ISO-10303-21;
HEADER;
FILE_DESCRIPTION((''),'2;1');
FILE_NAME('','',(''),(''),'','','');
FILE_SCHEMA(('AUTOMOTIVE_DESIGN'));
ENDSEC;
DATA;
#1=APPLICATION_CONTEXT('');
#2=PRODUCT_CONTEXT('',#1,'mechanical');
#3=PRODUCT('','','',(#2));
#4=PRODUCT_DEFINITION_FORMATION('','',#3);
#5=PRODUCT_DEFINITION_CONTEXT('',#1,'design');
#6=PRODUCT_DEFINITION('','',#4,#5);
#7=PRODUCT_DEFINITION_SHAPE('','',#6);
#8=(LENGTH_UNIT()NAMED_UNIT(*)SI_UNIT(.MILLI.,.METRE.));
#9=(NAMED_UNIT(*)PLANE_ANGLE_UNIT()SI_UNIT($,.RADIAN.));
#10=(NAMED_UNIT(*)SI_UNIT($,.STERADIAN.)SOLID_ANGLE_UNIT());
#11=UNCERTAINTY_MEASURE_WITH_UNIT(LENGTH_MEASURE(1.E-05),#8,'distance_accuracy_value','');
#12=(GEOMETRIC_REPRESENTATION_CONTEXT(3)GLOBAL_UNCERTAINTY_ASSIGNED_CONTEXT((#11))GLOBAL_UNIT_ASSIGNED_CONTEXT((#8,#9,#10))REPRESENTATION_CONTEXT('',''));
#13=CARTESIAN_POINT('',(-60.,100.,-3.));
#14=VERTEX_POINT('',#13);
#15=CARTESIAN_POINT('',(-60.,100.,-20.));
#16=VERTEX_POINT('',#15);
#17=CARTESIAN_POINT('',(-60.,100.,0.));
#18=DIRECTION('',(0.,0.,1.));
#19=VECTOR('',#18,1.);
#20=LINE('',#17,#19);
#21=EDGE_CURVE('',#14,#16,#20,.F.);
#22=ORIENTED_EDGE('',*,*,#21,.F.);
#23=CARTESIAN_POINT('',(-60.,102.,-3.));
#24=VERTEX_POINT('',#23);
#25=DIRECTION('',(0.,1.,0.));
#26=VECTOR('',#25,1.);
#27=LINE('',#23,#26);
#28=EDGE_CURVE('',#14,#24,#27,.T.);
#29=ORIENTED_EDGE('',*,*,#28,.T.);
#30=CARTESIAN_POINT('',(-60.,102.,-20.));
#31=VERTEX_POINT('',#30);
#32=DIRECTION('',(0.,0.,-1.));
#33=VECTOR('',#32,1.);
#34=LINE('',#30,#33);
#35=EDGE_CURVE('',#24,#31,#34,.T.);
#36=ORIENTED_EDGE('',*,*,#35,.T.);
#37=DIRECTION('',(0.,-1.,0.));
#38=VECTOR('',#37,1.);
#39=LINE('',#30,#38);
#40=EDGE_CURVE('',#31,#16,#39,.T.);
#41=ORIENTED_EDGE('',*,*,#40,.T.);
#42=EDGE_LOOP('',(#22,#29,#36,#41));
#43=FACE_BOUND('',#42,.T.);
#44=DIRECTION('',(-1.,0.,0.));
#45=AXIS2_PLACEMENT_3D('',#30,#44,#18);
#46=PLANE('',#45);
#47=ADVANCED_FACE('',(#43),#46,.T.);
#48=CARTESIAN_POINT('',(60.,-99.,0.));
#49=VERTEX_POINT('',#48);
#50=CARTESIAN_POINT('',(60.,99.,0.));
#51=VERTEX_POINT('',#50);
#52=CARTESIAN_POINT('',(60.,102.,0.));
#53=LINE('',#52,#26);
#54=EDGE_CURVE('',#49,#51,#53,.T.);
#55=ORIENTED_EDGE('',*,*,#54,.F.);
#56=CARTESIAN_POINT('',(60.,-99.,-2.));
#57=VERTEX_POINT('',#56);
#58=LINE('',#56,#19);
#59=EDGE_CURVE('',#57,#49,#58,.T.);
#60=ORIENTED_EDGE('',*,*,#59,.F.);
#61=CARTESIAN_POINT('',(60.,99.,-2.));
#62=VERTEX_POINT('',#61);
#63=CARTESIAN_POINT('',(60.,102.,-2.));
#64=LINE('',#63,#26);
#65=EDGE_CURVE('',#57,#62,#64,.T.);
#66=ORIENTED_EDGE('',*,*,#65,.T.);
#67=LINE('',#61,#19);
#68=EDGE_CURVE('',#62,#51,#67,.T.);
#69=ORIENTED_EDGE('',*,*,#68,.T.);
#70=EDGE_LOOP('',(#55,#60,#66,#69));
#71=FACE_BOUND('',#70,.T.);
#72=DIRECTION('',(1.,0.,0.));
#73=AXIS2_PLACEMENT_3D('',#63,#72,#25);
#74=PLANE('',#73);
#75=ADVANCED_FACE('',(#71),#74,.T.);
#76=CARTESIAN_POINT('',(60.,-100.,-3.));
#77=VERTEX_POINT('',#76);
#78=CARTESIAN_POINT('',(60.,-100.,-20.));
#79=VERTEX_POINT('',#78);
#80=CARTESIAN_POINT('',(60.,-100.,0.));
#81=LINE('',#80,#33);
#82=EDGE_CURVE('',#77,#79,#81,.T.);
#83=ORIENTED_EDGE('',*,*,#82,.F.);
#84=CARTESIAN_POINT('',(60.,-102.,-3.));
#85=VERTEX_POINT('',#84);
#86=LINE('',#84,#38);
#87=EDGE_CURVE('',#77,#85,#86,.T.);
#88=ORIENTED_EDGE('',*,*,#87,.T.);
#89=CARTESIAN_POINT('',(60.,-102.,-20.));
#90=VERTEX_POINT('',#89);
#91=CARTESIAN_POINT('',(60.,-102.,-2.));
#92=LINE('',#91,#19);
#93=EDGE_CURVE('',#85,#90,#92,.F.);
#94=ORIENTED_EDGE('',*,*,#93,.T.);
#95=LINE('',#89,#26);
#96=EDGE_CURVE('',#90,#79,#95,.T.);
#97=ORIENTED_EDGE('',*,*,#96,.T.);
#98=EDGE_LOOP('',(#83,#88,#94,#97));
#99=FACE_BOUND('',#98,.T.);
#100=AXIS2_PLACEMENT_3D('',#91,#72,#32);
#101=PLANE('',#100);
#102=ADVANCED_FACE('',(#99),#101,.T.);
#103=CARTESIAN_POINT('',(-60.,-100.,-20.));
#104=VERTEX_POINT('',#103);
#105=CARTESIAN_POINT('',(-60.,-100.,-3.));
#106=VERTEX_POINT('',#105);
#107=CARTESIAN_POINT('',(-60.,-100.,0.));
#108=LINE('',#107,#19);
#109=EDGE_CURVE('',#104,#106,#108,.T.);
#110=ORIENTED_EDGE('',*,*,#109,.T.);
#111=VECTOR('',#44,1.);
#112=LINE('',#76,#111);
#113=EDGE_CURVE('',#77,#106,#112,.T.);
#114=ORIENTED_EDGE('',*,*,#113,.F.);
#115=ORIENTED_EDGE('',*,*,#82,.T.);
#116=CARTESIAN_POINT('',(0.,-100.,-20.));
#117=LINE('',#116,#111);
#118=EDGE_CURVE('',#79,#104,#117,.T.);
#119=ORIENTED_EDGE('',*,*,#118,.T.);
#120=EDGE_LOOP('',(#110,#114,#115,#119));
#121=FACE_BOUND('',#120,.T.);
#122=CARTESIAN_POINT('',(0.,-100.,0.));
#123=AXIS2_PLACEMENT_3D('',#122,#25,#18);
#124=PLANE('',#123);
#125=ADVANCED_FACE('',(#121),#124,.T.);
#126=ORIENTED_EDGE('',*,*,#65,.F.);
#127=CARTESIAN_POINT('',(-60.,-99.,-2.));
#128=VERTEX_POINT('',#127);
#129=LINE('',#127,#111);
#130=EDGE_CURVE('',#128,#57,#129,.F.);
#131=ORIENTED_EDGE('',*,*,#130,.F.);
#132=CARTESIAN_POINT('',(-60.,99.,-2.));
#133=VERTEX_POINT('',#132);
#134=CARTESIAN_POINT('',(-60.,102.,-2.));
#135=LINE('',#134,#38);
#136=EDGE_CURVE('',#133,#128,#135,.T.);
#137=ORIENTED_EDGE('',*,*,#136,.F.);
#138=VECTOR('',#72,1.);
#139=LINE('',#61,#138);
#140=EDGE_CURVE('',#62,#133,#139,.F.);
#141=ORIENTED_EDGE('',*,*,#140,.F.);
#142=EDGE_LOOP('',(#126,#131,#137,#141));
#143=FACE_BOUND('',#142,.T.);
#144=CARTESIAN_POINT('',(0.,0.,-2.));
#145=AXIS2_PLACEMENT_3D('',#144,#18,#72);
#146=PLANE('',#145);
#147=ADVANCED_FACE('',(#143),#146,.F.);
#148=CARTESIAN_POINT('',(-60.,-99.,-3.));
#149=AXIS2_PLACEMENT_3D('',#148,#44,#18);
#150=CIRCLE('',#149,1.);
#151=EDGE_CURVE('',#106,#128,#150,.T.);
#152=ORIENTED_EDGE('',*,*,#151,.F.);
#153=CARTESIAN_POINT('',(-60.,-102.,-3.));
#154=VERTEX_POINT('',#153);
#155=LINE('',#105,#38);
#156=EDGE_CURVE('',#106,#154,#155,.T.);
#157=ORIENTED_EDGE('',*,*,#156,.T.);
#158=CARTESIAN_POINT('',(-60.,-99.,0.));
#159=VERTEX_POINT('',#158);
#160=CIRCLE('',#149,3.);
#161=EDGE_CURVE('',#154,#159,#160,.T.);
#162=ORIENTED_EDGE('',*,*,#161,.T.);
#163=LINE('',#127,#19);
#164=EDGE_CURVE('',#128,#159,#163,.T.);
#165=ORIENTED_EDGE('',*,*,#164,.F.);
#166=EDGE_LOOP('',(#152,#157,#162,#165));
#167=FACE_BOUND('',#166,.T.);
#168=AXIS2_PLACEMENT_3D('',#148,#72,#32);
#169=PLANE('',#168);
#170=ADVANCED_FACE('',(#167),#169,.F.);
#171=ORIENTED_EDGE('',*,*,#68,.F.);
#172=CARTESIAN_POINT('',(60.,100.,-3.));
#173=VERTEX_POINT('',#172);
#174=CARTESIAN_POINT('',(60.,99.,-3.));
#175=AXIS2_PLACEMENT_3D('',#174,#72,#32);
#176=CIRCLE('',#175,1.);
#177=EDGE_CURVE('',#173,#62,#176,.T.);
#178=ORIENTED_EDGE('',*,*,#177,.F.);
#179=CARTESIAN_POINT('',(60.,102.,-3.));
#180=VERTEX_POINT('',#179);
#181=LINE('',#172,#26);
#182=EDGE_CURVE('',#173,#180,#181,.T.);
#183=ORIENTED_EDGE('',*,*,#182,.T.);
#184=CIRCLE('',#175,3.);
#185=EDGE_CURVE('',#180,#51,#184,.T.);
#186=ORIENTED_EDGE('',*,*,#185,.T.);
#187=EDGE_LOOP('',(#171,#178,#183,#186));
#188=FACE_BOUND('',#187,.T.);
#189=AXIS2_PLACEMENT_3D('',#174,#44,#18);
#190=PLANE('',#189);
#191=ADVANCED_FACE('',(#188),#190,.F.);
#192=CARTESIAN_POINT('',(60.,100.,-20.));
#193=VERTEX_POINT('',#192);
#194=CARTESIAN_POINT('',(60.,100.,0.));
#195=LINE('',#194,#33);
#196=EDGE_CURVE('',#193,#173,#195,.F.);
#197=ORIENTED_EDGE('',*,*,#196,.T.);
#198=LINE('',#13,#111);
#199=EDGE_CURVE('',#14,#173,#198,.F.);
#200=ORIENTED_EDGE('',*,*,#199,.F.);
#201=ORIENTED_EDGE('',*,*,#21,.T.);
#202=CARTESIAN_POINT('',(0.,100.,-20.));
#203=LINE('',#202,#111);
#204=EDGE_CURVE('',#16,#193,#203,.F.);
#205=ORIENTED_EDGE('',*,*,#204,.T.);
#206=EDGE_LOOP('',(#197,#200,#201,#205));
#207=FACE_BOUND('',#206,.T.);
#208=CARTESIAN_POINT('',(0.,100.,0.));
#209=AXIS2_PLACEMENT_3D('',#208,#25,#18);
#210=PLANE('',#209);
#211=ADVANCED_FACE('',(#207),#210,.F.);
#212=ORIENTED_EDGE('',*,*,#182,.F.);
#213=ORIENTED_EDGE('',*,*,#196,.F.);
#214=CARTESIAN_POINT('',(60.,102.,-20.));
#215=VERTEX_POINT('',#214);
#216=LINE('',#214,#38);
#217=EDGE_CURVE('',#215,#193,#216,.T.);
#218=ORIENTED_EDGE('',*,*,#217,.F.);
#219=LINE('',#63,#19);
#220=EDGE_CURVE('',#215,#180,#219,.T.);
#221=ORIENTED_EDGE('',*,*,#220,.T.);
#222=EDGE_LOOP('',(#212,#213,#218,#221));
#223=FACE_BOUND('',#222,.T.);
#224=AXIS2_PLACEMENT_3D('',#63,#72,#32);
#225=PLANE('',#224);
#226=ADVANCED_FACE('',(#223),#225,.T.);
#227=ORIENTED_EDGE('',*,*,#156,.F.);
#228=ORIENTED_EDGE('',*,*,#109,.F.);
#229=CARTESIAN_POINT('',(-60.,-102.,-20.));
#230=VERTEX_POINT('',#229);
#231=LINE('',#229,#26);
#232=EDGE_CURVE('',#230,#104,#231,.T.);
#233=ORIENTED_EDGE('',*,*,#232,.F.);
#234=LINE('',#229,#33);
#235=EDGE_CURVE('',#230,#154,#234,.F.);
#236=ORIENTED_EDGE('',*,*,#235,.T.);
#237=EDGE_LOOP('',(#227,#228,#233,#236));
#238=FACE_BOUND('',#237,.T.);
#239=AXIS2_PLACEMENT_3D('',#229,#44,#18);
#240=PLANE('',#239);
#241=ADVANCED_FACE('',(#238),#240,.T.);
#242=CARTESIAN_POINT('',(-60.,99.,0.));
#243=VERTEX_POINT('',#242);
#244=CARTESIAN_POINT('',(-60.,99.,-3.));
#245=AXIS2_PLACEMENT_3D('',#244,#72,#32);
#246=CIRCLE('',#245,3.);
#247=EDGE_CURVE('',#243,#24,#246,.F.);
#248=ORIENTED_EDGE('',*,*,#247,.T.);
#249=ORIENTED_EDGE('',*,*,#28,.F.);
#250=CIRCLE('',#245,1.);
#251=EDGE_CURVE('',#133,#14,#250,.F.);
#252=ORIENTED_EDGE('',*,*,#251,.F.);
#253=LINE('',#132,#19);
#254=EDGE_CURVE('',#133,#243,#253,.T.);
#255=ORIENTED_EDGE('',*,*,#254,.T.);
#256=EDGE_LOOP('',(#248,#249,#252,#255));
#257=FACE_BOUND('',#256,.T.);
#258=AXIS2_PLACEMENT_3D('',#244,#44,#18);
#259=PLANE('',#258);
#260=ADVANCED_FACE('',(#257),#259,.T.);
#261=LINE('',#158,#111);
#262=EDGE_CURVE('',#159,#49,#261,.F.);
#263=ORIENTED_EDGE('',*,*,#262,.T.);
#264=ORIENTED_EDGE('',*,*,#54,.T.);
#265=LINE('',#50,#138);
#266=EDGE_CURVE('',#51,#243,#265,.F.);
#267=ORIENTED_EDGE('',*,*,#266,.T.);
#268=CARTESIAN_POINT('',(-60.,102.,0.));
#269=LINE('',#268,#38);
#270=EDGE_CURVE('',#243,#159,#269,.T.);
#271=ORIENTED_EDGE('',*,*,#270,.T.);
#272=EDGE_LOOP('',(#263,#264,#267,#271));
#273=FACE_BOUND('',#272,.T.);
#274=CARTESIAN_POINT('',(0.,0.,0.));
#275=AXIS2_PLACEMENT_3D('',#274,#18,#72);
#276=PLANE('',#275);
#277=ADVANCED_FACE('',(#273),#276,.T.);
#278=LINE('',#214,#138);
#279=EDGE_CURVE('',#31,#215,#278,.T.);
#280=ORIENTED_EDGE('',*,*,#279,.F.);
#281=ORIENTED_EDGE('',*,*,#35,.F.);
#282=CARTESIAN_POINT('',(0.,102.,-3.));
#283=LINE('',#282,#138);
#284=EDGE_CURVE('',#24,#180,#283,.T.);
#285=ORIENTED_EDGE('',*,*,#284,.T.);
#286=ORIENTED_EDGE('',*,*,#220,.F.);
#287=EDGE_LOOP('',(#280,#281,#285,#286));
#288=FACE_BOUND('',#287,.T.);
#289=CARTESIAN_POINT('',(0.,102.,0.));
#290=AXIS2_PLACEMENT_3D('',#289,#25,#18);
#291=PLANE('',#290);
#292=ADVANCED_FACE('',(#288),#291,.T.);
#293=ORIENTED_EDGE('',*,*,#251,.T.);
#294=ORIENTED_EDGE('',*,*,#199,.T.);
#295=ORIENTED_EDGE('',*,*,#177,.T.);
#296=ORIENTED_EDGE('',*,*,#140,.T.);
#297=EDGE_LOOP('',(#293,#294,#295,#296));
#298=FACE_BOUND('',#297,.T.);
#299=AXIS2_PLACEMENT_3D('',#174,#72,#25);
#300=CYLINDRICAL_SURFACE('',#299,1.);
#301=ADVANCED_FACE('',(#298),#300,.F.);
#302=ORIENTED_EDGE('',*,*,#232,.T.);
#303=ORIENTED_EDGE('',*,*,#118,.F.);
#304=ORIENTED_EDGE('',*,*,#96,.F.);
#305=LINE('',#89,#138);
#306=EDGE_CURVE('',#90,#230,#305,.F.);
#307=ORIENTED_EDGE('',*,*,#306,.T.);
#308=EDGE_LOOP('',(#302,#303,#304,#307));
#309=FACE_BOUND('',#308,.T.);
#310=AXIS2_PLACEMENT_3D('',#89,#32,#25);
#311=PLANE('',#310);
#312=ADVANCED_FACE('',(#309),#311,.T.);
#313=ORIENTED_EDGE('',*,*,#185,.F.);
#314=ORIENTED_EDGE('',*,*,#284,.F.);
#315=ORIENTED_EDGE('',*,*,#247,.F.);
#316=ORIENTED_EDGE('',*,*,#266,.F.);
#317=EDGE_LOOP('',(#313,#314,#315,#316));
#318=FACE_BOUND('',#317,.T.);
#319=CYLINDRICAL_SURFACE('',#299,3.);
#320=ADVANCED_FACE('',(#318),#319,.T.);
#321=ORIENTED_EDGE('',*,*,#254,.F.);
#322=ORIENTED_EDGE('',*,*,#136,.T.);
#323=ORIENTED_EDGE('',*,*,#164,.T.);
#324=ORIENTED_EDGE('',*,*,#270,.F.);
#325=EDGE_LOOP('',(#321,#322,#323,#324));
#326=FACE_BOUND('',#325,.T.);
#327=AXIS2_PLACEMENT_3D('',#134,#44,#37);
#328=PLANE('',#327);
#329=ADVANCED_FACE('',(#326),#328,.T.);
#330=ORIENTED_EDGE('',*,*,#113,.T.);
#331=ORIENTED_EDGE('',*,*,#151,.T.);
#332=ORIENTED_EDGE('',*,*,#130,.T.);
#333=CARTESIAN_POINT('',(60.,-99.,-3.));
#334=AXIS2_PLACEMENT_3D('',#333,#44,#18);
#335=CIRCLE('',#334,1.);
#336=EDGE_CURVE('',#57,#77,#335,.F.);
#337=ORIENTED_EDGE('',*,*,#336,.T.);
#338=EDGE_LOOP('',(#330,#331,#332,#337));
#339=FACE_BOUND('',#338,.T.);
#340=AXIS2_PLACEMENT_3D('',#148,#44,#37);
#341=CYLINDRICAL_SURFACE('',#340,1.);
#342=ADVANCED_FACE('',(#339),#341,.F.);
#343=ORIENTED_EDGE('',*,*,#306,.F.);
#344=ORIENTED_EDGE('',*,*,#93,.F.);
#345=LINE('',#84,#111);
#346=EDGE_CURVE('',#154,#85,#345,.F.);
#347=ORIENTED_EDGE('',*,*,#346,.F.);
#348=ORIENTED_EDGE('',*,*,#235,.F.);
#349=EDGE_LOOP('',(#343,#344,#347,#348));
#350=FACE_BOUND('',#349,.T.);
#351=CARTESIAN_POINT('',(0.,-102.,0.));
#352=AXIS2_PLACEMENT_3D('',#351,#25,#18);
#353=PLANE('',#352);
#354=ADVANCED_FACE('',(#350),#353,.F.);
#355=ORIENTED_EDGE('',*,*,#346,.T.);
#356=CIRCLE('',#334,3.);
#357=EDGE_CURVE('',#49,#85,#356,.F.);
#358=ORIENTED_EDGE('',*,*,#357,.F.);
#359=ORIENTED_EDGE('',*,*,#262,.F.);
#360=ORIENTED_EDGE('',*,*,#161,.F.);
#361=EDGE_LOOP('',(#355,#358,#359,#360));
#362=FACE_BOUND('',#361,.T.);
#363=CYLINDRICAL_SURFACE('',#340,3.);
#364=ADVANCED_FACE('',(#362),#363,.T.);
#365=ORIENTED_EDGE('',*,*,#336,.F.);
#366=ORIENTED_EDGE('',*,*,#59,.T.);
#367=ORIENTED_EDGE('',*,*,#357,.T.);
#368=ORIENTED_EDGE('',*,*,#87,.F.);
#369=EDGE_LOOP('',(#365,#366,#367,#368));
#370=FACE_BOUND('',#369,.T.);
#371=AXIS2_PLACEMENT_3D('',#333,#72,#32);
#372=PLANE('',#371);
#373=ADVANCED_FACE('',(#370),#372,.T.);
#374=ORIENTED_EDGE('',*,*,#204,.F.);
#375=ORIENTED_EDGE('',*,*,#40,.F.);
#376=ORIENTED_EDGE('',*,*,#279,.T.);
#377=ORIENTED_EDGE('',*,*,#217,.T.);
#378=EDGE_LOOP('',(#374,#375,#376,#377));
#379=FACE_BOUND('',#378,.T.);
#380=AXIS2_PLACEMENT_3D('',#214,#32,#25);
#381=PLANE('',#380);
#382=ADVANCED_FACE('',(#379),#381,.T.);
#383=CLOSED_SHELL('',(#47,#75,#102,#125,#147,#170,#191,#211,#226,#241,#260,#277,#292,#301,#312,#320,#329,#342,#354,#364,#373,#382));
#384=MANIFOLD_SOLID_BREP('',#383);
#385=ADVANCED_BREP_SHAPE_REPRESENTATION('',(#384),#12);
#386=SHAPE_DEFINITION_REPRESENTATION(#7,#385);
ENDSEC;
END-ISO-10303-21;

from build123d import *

# Parameters (mm, degrees)
SKETCH_1_W                         = 120
SKETCH_1_H                         = 204
SM_BASE_FLANGE_1_DEPTH             = 2
SM_EDGE_FLANGE_1_STRIP_W           = 10
SM_EDGE_FLANGE_1_STRIP_H           = 2
SM_EDGE_FLANGE_1_STRIP_CUT_DEPTH   = 120
SM_EDGE_FLANGE_1_STRIP_2_W         = 10
SM_EDGE_FLANGE_1_STRIP_2_H         = 2
SM_EDGE_FLANGE_1_STRIP_CUT_2_DEPTH = 120
SM_EDGE_FLANGE_1_DEPTH             = 120
SM_EDGE_FLANGE_1_BEND_DEPTH        = 120


# Sheet-metal steps are written as plain solids
with BuildPart() as part:
    # Sketch 1 → 基体-法兰1 (new body)
    with BuildSketch(Plane.XY):
        Rectangle(SKETCH_1_W, SKETCH_1_H)
    extrude(amount=-SM_BASE_FLANGE_1_DEPTH)

    # 边线-法兰1 strip (across the edge) → 边线-法兰1 strip cut (cut)
    with BuildSketch(Plane(origin=(-60, 102, -2), x_dir=(0, -1, 0), z_dir=(1, 0, 0))):
        with Locations((-2, -1)):
            Rectangle(SM_EDGE_FLANGE_1_STRIP_W, SM_EDGE_FLANGE_1_STRIP_H)
    extrude(amount=SM_EDGE_FLANGE_1_STRIP_CUT_DEPTH, mode=Mode.SUBTRACT)

    # 边线-法兰1 strip 2 (across the edge) → 边线-法兰1 strip cut 2 (cut)
    with BuildSketch(Plane(origin=(60, -102, -2), x_dir=(0, 1, 0), z_dir=(-1, 0, 0))):
        with Locations((-2, -1)):
            Rectangle(SM_EDGE_FLANGE_1_STRIP_2_W, SM_EDGE_FLANGE_1_STRIP_2_H)
    extrude(amount=SM_EDGE_FLANGE_1_STRIP_CUT_2_DEPTH, mode=Mode.SUBTRACT)

    # 边线-法兰1 section (across the edge) → 边线-法兰1 (add)
    with BuildSketch(Plane(origin=(-60, 102, -2), x_dir=(0, -1, 0), z_dir=(1, 0, 0))):
        with BuildLine():
            Line((0, 1), (0, 18))
            Line((0, 18), (2, 18))
            Line((2, 18), (2, 1))
            ThreePointArc((2, 1), (2.292893219, 0.292893219), (3, 0))
            Line((3, 0), (3, -2))
            ThreePointArc((3, -2), (0.878679656, -1.121320344), (0, 1))
        make_face()
    extrude(amount=SM_EDGE_FLANGE_1_DEPTH)

    # 边线-法兰1 section 2 (across the edge) → 边线-法兰1 bend (add)
    with BuildSketch(Plane(origin=(60, -102, -2), x_dir=(0, 1, 0), z_dir=(-1, 0, 0))):
        with BuildLine():
            Line((0, 1), (0, 18))
            Line((0, 18), (2, 18))
            Line((2, 18), (2, 1))
            ThreePointArc((2, 1), (2.292893219, 0.292893219), (3, 0))
            Line((3, 0), (3, -2))
            ThreePointArc((3, -2), (0.878679656, -1.121320344), (0, 1))
        make_face()
    extrude(amount=SM_EDGE_FLANGE_1_BEND_DEPTH)


solid = part.part
